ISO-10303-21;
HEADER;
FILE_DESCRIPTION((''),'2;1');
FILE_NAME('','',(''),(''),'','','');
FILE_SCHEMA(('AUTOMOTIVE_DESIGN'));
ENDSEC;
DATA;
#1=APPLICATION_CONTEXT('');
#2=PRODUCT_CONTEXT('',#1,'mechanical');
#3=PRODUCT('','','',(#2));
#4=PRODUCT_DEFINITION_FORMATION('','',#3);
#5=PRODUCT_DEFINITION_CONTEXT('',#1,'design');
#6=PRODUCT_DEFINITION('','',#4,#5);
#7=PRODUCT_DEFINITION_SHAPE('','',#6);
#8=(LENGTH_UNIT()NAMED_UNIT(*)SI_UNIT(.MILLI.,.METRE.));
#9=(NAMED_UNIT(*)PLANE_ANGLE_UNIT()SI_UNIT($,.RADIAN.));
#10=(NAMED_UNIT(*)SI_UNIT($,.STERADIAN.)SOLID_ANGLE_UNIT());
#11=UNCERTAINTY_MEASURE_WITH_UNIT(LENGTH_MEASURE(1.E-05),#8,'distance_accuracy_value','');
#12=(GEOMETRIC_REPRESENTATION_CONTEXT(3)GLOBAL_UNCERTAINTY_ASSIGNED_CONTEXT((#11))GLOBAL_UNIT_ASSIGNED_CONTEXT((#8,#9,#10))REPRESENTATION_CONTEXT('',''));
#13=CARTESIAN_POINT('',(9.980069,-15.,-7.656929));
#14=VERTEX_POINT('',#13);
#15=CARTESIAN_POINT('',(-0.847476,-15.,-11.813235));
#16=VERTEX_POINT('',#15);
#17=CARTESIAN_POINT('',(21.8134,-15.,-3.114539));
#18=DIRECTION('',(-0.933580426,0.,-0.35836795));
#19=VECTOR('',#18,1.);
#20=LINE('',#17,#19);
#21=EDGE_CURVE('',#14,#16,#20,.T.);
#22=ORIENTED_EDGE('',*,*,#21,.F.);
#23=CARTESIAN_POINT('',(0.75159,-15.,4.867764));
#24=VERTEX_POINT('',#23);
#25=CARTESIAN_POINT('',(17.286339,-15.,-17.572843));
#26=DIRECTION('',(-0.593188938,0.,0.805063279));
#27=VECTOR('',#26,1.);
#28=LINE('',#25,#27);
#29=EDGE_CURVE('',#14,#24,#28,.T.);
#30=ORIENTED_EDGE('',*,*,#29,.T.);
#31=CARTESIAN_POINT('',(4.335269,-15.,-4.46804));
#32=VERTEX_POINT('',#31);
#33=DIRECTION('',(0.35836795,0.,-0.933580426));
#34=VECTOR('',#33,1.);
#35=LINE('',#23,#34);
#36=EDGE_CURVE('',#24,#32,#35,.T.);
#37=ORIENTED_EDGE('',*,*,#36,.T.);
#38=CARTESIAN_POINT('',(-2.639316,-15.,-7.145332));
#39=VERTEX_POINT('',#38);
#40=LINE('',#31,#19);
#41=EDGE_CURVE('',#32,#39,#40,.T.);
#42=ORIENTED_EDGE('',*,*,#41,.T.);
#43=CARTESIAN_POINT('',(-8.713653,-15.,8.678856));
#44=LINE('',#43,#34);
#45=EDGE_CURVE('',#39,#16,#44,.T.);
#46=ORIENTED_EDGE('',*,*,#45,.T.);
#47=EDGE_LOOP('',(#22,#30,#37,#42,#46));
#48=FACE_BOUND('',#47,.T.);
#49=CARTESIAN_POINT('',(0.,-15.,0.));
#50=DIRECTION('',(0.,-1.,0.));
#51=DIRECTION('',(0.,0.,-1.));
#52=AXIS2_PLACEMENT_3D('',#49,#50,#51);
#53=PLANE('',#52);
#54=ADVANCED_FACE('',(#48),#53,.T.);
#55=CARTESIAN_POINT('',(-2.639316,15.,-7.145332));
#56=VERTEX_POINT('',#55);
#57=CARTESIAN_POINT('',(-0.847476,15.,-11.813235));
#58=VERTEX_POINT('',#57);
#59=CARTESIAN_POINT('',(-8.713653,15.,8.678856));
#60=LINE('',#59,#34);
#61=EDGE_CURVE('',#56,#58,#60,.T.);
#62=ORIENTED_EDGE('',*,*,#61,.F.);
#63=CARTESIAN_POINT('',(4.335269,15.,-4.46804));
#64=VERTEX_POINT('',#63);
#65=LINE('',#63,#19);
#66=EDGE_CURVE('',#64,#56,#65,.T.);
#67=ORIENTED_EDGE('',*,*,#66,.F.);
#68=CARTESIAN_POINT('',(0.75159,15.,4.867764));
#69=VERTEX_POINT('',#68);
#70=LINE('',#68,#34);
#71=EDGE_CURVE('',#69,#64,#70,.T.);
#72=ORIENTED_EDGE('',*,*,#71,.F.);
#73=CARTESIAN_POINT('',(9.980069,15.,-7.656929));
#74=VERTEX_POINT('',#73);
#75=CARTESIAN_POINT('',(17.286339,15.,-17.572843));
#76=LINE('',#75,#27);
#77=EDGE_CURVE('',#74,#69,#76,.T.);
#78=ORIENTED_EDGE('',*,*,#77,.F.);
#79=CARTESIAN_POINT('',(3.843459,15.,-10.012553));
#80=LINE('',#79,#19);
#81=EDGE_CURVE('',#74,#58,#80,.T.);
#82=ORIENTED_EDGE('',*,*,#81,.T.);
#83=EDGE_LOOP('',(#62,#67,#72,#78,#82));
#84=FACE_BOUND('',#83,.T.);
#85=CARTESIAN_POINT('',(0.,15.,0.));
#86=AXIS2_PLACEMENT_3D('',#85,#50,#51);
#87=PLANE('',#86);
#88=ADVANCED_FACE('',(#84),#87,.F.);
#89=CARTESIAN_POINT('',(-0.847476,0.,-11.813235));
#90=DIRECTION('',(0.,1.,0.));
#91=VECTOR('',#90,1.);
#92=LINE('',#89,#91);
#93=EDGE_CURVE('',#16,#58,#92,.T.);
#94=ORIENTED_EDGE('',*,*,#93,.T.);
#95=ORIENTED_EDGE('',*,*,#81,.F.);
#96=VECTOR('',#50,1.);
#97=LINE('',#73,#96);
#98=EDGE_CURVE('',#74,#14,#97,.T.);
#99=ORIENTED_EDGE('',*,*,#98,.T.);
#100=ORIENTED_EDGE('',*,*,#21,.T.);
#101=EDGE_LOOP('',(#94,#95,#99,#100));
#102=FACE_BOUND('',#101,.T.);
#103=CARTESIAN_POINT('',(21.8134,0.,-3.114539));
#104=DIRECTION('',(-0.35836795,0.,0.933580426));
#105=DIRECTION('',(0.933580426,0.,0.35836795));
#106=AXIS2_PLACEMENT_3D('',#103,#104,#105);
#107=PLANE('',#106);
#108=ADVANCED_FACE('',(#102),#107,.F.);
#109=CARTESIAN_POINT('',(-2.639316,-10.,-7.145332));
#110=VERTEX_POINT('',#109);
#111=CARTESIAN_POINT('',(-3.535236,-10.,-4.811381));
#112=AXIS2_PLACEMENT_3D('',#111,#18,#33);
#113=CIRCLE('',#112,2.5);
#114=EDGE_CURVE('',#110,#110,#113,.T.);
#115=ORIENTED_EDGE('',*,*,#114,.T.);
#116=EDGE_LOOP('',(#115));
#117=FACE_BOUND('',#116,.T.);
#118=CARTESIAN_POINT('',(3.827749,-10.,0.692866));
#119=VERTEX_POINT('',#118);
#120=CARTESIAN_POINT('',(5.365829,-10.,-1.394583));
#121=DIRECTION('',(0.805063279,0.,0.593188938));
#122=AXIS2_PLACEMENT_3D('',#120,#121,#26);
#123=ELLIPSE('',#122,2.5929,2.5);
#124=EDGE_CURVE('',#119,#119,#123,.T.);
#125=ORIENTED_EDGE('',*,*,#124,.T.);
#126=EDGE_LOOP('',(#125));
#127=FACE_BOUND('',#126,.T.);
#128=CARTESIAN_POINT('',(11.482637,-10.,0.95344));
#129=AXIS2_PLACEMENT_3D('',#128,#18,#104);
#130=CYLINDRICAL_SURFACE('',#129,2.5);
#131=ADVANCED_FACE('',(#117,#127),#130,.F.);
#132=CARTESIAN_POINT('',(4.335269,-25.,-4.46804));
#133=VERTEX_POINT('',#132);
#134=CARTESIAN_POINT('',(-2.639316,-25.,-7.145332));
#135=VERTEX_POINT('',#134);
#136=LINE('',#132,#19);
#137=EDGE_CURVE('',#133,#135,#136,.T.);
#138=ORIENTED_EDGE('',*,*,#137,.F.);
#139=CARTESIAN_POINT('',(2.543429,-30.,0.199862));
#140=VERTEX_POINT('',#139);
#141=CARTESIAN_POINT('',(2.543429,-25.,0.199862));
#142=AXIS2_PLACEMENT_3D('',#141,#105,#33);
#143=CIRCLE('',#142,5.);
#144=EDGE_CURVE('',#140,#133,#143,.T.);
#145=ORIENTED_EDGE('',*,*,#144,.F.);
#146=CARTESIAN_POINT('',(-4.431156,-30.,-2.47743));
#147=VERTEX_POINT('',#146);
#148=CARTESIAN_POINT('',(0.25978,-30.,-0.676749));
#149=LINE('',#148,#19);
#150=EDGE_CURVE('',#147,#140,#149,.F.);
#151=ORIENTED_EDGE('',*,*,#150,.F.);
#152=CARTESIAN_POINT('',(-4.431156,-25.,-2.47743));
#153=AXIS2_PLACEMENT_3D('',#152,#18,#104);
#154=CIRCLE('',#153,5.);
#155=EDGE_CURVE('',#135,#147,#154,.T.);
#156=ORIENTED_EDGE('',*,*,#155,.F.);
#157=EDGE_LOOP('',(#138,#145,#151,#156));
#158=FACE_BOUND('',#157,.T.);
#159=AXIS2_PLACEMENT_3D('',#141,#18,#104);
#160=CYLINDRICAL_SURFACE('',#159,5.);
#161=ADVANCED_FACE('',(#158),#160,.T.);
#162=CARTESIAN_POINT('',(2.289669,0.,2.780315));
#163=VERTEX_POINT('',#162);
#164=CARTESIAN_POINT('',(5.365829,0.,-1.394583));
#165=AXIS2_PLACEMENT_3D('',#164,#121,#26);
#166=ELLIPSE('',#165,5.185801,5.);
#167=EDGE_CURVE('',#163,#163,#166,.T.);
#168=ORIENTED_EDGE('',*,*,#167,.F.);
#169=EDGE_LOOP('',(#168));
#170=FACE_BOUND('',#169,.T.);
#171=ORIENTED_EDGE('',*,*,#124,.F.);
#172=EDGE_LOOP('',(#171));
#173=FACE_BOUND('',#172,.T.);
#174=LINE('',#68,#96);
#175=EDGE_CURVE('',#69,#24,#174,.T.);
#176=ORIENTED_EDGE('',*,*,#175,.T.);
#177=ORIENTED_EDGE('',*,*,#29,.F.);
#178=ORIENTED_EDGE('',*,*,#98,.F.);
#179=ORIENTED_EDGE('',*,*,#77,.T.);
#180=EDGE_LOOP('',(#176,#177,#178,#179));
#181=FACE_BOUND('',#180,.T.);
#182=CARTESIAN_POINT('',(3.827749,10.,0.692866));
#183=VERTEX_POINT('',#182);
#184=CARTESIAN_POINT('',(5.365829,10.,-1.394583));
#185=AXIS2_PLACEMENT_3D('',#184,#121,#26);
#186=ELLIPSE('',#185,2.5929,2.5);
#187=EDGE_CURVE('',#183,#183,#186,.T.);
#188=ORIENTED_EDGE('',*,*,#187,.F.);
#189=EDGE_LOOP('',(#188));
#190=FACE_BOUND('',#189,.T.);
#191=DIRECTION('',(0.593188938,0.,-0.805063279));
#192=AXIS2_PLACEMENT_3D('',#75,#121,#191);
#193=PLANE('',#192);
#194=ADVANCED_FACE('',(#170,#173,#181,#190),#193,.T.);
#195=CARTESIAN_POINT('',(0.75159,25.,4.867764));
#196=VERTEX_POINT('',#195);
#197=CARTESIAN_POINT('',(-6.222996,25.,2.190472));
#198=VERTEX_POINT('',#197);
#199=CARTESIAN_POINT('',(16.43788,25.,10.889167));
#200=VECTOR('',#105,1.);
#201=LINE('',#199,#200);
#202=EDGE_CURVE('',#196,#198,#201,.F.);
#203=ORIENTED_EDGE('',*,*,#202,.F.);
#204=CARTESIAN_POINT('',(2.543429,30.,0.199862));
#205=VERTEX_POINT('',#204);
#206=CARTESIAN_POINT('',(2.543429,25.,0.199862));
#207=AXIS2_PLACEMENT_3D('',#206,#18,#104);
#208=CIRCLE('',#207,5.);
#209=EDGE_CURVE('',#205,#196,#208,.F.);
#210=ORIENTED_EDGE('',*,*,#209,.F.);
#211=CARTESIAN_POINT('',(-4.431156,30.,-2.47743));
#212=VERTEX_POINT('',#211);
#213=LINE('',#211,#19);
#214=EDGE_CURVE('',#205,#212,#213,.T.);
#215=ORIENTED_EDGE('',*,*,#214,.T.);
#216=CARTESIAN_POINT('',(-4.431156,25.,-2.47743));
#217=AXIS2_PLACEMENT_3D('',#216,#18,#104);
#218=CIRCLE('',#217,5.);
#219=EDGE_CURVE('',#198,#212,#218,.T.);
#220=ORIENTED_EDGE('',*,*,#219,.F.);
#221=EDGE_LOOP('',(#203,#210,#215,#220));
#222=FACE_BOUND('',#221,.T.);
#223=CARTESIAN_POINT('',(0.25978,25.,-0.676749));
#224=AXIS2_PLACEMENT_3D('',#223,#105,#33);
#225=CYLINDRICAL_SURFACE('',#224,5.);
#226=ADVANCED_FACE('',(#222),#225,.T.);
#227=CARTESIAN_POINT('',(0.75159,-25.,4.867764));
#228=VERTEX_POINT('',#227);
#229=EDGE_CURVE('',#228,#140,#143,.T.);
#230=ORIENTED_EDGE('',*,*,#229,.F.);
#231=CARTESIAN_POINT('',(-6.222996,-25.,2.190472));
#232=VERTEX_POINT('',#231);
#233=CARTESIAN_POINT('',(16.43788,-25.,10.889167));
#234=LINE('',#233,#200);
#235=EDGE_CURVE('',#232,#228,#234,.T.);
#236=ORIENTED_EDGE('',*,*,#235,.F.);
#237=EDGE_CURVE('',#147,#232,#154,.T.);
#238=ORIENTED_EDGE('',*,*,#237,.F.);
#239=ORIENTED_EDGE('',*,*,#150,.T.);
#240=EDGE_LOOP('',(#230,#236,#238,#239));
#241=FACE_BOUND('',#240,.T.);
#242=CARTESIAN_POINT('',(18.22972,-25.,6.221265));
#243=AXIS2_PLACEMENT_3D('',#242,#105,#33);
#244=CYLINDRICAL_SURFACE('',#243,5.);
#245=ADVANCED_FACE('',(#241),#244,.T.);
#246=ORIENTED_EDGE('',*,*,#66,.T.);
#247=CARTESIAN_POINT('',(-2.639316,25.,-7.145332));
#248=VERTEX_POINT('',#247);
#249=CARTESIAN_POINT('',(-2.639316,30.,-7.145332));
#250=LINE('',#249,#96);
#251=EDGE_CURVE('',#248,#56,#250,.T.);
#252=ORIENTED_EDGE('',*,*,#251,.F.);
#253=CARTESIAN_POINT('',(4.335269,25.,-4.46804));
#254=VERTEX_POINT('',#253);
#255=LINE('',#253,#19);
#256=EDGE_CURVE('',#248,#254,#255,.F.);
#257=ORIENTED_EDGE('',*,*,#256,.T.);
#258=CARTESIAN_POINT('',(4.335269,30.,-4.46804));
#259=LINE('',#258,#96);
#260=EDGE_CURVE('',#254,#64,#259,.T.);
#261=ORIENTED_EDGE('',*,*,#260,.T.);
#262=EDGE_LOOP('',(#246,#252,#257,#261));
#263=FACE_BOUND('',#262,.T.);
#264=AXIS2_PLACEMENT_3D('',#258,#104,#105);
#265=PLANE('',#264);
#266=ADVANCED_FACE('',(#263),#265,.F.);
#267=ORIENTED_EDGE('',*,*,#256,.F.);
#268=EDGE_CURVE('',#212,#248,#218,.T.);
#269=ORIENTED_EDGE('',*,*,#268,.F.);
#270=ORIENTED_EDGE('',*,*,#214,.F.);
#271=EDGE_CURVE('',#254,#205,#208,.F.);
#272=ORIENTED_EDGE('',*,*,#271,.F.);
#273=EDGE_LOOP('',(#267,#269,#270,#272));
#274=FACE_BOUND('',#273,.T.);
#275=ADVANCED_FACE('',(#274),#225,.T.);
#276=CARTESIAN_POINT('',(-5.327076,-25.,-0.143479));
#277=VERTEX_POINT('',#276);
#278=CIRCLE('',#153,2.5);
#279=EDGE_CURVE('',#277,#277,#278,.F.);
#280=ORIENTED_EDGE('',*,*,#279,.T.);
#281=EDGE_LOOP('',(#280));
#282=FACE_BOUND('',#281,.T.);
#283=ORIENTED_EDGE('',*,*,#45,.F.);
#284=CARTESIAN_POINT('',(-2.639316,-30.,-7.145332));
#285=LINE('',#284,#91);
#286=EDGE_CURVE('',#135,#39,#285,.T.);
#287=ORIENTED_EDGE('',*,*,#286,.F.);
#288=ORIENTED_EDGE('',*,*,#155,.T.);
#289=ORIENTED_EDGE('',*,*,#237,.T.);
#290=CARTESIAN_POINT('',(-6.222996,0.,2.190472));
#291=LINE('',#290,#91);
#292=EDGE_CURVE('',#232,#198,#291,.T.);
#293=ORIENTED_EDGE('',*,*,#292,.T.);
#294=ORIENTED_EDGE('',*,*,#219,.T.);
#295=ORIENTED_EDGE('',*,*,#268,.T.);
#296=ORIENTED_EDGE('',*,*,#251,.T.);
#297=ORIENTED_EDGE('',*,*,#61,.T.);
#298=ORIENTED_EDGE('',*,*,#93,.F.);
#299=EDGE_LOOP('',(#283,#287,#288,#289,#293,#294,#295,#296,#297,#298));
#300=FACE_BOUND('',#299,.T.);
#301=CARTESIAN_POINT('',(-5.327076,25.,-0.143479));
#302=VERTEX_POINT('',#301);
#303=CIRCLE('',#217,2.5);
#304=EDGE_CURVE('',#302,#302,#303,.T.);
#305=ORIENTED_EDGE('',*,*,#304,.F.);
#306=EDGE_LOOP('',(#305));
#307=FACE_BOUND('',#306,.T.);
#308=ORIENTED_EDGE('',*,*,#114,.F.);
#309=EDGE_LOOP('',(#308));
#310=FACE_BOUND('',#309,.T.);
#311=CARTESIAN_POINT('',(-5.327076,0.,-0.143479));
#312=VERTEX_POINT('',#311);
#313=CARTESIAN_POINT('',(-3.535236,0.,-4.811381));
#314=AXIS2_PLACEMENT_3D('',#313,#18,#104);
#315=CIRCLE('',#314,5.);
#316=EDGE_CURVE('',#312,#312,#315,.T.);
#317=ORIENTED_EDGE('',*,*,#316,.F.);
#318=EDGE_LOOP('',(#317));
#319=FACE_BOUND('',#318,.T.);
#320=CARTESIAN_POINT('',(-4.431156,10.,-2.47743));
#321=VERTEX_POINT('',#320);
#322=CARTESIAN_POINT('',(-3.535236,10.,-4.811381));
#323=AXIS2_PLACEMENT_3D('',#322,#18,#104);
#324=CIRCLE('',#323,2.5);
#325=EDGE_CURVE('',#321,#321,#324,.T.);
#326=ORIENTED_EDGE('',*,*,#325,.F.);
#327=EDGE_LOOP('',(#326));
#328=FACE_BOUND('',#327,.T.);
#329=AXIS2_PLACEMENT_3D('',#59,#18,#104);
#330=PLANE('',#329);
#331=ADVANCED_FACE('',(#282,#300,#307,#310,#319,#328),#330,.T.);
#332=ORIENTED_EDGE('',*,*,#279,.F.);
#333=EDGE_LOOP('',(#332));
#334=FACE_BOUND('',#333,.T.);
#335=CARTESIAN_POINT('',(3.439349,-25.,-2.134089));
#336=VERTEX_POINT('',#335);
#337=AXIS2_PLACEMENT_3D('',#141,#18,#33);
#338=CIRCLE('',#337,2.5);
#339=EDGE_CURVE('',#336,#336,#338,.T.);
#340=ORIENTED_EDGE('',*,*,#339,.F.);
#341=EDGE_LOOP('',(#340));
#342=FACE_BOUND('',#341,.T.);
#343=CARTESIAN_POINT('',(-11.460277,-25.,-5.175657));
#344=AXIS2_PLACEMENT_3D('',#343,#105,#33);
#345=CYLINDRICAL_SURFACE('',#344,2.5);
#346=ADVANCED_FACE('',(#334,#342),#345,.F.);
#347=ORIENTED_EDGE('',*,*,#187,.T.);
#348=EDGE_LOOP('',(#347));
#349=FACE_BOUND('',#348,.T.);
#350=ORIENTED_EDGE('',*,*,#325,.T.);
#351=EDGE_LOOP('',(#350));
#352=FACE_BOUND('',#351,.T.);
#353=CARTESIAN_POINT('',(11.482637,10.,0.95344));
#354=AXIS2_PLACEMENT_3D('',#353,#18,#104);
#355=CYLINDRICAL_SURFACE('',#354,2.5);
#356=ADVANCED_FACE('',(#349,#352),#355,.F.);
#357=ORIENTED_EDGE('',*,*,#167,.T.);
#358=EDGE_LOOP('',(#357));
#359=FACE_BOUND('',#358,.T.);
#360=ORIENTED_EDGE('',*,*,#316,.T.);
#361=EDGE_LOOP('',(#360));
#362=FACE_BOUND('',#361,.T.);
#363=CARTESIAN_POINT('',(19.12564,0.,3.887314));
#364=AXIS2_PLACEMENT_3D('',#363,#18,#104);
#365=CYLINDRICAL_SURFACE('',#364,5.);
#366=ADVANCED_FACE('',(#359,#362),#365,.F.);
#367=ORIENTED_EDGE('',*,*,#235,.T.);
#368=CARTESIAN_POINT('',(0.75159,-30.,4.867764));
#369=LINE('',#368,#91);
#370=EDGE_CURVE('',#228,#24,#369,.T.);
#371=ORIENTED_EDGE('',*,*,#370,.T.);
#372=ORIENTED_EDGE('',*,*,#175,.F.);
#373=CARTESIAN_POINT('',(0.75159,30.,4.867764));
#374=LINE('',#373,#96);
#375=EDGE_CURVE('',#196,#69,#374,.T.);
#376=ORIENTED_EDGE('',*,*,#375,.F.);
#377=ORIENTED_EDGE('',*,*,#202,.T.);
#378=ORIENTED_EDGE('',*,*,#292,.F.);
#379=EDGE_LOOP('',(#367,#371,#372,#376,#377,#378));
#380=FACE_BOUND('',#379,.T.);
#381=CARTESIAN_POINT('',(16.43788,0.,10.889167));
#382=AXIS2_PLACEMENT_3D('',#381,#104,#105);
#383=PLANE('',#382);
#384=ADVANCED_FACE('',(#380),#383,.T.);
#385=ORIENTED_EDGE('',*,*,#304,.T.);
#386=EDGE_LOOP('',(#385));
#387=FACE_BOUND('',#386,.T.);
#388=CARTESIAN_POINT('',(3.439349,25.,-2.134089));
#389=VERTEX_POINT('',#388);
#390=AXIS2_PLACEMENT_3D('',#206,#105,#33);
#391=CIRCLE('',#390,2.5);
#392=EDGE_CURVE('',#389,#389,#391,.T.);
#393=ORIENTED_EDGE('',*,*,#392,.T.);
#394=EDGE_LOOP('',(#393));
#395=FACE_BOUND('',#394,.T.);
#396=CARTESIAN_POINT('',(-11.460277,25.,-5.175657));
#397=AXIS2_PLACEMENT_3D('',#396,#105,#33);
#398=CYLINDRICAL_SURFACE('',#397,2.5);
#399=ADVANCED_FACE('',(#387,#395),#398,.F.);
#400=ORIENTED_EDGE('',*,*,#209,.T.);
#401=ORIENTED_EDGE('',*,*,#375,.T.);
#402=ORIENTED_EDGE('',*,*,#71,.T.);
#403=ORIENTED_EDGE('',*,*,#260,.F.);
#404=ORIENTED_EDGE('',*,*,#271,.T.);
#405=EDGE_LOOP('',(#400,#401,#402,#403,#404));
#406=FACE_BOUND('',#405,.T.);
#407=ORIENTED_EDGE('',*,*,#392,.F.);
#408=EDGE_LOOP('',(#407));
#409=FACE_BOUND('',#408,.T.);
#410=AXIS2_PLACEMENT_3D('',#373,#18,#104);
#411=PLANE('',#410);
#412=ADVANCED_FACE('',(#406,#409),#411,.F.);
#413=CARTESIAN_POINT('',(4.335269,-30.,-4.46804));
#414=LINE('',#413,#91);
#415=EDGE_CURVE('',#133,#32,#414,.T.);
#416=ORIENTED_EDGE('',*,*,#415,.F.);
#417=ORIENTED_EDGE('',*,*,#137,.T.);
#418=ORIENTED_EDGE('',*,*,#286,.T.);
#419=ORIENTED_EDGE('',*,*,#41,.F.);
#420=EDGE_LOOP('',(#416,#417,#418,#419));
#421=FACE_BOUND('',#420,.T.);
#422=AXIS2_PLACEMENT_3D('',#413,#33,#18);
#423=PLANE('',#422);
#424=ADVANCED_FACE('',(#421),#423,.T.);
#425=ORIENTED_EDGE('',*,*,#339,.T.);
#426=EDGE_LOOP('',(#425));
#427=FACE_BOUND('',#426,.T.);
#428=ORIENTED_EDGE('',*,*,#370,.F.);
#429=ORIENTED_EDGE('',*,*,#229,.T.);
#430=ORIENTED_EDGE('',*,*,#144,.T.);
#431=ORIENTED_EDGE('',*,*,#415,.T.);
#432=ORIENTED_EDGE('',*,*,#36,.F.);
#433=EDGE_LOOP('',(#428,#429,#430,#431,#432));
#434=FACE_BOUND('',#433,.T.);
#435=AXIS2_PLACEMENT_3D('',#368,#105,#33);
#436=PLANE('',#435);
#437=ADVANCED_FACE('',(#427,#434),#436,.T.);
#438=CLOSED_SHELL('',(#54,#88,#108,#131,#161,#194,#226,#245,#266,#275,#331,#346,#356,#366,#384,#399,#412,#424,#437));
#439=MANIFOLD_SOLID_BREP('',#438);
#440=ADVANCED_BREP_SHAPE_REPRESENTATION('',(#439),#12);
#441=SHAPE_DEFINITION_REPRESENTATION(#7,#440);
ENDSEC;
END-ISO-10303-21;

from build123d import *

# Parameters (mm, degrees)
BOSS_EXTRUDE1_DEPTH  = 15
CUT_EXTRUDE1_DEPTH   = 43.992404265
SKETCH3_R            = 5
CUT_EXTRUDE2_DEPTH   = 36.004455062
SKETCH5_W            = 10.737519515
SKETCH5_H            = 30
SKETCH5_W_2          = 6.95
CUT_EXTRUDE3_DEPTH   = 36.004455062
SKETCH7_R            = 2.5
CUT_EXTRUDE4_DEPTH   = 24.248431868
BOSS_EXTRUDE4_DEPTH  = 15
SKETCH9_R            = 2.5
CUT_EXTRUDE5_DEPTH   = 15
FILLET1_R            = 5
FILLET1_OF_MIRROR1_R = 5


with BuildPart() as part:
    # Sketch1 → Boss-Extrude1 (new, symmetric)
    with BuildSketch(Plane(origin=(0, 0, 0), x_dir=(1, 0, 0), z_dir=(0, 1, 0))):
        Polygon((-9.48841315, -9.301961234), (-0.940151386, -8.006660352), (17.861436312, 17.510450435), (15.605946265, 22.576364023), (9.067678571, 25.086169843), (2.607936691, 22.210107458), align=None)
    extrude(amount=BOSS_EXTRUDE1_DEPTH, both=True)

    # Sketch2 → Cut-Extrude1 (cut, through all)
    with BuildSketch(Plane.XZ.offset(15)):
        Polygon((-9.48841315, 9.301961234), (2.607936691, -22.210107458), (9.067678571, -25.086169843), (15.605946265, -22.576364023), (17.861436312, -17.510450435), (-0.940151386, 8.006660352), align=None)
        Polygon((-8.713652873, 8.678855764), (3.000506472, -21.837572646), (9.081845433, -24.545159197), (15.233411453, -22.183794243), (17.286339277, -17.572842857), (-1.219829574, 7.543331818), align=None, mode=Mode.SUBTRACT)
    extrude(amount=-CUT_EXTRUDE1_DEPTH, mode=Mode.SUBTRACT)

    # Sketch3 → Cut-Extrude2 (cut, through all)
    with BuildSketch(Plane(origin=(-4.690935448, 0, -1.800681409), x_dir=(-0.3583679495453122, 0, 0.9335804264971972), z_dir=(-0.9335804264971972, 0, -0.3583679495453122))):
        with Locations((-3.224896221, 0)):
            Circle(SKETCH3_R)
    extrude(amount=-CUT_EXTRUDE2_DEPTH, mode=Mode.SUBTRACT)

    # Sketch5 → Cut-Extrude3 (cut, through all)
    with BuildSketch(Plane(origin=(-4.690935448, 0, -1.800681409), x_dir=(-0.35836794954531215, 0, 0.9335804264971973), z_dir=(-0.9335804264971973, 0, -0.35836794954531215))):
        with Locations((-16.093655978, 0)):
            Rectangle(SKETCH5_W, SKETCH5_H)
        with Locations((7.750103779, 0)):
            Rectangle(SKETCH5_W_2, SKETCH5_H)
    extrude(amount=-CUT_EXTRUDE3_DEPTH, mode=Mode.SUBTRACT)


with BuildPart() as cut_extrude3_kept_piece:
    # of the separate pieces the step leaves, the one the design keeps (cut_extrude3_pieces_kept)
    add(part.part.solids().sort_by_distance((-6.222995624, -15, 2.1904718))[0])

    # Sketch7 → Cut-Extrude4 (cut, through all)
    with BuildSketch(Plane(origin=(-4.690935448, 0, -1.800681409), x_dir=(-0.35836794954531215, 0, 0.9335804264971973), z_dir=(-0.9335804264971973, 0, -0.35836794954531215))):
        with Locations((-3.224896221, 10)):
            Circle(SKETCH7_R)
        with Locations((-3.224896221, -10)):
            Circle(SKETCH7_R)
    extrude(amount=-CUT_EXTRUDE4_DEPTH, mode=Mode.SUBTRACT)

    # Sketch8 → Boss-Extrude4 (add)
    with BuildSketch(Plane(origin=(0, 15, 0), x_dir=(1, 0, 0), z_dir=(0, 1, 0))):
        Polygon((-2.639316128, 7.145332465), (-6.222995624, -2.1904718), (0.751589516, -4.867764195), (4.335269011, 4.46804007), align=None)
    boss_extrude4 = extrude(amount=BOSS_EXTRUDE4_DEPTH)

    # Sketch9 → Cut-Extrude5 (cut)
    with BuildSketch(Plane(origin=(2.283649691, 0, 0.876610985), x_dir=(0.3583679495453119, 0, -0.9335804264971973), z_dir=(0.9335804264971973, 0, 0.3583679495453119))):
        with Locations((0.724896221, 25)):
            Circle(SKETCH9_R)
    cut_extrude5 = extrude(amount=-CUT_EXTRUDE5_DEPTH, mode=Mode.SUBTRACT)

    # Fillet1
    fillet1_edges = [cut_extrude3_kept_piece.edges().sort_by_distance(p)[0] for p in [
        (-2.735703054, 30, 3.529117997),
        (0.847976442, 30, -5.806686268),
    ]]
    fillet(fillet1_edges, radius=FILLET1_R - 0.0001)  # a hair under: the kernel refuses the full size

    # Mirror1: Boss-Extrude4, Cut-Extrude5 across plane
    add(boss_extrude4.mirror(Plane.ZX))
    add(cut_extrude5.mirror(Plane.ZX), mode=Mode.SUBTRACT)

    # Fillet1 of Mirror1
    fillet1_of_mirror1_edges = [cut_extrude3_kept_piece.edges().sort_by_distance(p)[0] for p in [
        (-2.735703054, -30, 3.529117997),
        (0.847976442, -30, -5.806686268),
    ]]
    fillet(fillet1_of_mirror1_edges, radius=FILLET1_OF_MIRROR1_R - 0.0001)  # a hair under: the kernel refuses the full size


solid = cut_extrude3_kept_piece.part
